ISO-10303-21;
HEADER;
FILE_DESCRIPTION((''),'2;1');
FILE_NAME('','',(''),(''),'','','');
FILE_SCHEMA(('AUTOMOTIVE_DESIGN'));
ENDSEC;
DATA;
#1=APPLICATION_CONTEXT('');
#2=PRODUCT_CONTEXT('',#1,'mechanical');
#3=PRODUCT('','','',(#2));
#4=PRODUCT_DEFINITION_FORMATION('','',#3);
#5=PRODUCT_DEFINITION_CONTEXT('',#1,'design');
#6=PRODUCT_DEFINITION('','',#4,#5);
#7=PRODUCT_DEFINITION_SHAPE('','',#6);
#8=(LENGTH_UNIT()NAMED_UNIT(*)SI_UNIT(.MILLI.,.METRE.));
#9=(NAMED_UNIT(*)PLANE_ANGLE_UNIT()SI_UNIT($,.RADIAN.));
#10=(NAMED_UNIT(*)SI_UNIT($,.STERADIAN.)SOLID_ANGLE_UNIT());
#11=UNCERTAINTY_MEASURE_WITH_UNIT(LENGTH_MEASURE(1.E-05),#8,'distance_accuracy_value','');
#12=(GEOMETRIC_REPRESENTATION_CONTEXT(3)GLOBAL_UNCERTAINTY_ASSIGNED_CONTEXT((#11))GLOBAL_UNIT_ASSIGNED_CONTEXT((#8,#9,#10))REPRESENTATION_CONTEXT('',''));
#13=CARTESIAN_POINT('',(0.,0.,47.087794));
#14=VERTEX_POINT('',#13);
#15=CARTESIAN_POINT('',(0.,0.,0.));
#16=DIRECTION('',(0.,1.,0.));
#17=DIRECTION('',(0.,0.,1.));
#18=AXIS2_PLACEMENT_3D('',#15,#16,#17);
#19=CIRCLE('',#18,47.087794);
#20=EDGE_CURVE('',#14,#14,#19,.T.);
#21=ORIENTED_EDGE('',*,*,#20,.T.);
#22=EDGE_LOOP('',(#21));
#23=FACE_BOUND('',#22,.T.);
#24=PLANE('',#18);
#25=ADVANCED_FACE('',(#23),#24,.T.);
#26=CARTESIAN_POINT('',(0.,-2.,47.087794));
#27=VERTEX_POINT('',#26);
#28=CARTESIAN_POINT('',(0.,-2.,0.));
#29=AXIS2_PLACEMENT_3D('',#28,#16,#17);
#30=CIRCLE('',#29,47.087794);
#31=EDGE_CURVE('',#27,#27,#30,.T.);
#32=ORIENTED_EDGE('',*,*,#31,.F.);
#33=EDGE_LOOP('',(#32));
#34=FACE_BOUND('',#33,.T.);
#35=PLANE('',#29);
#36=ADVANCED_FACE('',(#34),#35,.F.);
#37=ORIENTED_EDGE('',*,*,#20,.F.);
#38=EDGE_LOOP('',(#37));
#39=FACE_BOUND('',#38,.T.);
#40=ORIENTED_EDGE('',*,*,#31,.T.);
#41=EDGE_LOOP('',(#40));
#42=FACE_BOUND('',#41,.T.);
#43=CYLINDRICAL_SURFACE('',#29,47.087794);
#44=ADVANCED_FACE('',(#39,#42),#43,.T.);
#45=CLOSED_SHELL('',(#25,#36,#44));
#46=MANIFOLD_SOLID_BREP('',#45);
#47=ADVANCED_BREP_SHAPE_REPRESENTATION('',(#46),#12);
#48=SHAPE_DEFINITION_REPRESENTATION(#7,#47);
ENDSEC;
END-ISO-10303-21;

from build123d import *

# Parameters (mm, degrees)
SKETCH1_R          = 47.087793648
BASE_FLANGE1_DEPTH = 2


# Sheet-metal steps are written as plain solids
with BuildPart() as part:
    # Sketch1 → Base-Flange1 (new body)
    with BuildSketch(Plane(origin=(0, 0, 0), x_dir=(1, 0, 0), z_dir=(0, 1, 0))):
        with Locations(Location((0, 0, 0), (0, 0, 270))):
            Circle(SKETCH1_R)
    extrude(amount=-BASE_FLANGE1_DEPTH)


solid = part.part
